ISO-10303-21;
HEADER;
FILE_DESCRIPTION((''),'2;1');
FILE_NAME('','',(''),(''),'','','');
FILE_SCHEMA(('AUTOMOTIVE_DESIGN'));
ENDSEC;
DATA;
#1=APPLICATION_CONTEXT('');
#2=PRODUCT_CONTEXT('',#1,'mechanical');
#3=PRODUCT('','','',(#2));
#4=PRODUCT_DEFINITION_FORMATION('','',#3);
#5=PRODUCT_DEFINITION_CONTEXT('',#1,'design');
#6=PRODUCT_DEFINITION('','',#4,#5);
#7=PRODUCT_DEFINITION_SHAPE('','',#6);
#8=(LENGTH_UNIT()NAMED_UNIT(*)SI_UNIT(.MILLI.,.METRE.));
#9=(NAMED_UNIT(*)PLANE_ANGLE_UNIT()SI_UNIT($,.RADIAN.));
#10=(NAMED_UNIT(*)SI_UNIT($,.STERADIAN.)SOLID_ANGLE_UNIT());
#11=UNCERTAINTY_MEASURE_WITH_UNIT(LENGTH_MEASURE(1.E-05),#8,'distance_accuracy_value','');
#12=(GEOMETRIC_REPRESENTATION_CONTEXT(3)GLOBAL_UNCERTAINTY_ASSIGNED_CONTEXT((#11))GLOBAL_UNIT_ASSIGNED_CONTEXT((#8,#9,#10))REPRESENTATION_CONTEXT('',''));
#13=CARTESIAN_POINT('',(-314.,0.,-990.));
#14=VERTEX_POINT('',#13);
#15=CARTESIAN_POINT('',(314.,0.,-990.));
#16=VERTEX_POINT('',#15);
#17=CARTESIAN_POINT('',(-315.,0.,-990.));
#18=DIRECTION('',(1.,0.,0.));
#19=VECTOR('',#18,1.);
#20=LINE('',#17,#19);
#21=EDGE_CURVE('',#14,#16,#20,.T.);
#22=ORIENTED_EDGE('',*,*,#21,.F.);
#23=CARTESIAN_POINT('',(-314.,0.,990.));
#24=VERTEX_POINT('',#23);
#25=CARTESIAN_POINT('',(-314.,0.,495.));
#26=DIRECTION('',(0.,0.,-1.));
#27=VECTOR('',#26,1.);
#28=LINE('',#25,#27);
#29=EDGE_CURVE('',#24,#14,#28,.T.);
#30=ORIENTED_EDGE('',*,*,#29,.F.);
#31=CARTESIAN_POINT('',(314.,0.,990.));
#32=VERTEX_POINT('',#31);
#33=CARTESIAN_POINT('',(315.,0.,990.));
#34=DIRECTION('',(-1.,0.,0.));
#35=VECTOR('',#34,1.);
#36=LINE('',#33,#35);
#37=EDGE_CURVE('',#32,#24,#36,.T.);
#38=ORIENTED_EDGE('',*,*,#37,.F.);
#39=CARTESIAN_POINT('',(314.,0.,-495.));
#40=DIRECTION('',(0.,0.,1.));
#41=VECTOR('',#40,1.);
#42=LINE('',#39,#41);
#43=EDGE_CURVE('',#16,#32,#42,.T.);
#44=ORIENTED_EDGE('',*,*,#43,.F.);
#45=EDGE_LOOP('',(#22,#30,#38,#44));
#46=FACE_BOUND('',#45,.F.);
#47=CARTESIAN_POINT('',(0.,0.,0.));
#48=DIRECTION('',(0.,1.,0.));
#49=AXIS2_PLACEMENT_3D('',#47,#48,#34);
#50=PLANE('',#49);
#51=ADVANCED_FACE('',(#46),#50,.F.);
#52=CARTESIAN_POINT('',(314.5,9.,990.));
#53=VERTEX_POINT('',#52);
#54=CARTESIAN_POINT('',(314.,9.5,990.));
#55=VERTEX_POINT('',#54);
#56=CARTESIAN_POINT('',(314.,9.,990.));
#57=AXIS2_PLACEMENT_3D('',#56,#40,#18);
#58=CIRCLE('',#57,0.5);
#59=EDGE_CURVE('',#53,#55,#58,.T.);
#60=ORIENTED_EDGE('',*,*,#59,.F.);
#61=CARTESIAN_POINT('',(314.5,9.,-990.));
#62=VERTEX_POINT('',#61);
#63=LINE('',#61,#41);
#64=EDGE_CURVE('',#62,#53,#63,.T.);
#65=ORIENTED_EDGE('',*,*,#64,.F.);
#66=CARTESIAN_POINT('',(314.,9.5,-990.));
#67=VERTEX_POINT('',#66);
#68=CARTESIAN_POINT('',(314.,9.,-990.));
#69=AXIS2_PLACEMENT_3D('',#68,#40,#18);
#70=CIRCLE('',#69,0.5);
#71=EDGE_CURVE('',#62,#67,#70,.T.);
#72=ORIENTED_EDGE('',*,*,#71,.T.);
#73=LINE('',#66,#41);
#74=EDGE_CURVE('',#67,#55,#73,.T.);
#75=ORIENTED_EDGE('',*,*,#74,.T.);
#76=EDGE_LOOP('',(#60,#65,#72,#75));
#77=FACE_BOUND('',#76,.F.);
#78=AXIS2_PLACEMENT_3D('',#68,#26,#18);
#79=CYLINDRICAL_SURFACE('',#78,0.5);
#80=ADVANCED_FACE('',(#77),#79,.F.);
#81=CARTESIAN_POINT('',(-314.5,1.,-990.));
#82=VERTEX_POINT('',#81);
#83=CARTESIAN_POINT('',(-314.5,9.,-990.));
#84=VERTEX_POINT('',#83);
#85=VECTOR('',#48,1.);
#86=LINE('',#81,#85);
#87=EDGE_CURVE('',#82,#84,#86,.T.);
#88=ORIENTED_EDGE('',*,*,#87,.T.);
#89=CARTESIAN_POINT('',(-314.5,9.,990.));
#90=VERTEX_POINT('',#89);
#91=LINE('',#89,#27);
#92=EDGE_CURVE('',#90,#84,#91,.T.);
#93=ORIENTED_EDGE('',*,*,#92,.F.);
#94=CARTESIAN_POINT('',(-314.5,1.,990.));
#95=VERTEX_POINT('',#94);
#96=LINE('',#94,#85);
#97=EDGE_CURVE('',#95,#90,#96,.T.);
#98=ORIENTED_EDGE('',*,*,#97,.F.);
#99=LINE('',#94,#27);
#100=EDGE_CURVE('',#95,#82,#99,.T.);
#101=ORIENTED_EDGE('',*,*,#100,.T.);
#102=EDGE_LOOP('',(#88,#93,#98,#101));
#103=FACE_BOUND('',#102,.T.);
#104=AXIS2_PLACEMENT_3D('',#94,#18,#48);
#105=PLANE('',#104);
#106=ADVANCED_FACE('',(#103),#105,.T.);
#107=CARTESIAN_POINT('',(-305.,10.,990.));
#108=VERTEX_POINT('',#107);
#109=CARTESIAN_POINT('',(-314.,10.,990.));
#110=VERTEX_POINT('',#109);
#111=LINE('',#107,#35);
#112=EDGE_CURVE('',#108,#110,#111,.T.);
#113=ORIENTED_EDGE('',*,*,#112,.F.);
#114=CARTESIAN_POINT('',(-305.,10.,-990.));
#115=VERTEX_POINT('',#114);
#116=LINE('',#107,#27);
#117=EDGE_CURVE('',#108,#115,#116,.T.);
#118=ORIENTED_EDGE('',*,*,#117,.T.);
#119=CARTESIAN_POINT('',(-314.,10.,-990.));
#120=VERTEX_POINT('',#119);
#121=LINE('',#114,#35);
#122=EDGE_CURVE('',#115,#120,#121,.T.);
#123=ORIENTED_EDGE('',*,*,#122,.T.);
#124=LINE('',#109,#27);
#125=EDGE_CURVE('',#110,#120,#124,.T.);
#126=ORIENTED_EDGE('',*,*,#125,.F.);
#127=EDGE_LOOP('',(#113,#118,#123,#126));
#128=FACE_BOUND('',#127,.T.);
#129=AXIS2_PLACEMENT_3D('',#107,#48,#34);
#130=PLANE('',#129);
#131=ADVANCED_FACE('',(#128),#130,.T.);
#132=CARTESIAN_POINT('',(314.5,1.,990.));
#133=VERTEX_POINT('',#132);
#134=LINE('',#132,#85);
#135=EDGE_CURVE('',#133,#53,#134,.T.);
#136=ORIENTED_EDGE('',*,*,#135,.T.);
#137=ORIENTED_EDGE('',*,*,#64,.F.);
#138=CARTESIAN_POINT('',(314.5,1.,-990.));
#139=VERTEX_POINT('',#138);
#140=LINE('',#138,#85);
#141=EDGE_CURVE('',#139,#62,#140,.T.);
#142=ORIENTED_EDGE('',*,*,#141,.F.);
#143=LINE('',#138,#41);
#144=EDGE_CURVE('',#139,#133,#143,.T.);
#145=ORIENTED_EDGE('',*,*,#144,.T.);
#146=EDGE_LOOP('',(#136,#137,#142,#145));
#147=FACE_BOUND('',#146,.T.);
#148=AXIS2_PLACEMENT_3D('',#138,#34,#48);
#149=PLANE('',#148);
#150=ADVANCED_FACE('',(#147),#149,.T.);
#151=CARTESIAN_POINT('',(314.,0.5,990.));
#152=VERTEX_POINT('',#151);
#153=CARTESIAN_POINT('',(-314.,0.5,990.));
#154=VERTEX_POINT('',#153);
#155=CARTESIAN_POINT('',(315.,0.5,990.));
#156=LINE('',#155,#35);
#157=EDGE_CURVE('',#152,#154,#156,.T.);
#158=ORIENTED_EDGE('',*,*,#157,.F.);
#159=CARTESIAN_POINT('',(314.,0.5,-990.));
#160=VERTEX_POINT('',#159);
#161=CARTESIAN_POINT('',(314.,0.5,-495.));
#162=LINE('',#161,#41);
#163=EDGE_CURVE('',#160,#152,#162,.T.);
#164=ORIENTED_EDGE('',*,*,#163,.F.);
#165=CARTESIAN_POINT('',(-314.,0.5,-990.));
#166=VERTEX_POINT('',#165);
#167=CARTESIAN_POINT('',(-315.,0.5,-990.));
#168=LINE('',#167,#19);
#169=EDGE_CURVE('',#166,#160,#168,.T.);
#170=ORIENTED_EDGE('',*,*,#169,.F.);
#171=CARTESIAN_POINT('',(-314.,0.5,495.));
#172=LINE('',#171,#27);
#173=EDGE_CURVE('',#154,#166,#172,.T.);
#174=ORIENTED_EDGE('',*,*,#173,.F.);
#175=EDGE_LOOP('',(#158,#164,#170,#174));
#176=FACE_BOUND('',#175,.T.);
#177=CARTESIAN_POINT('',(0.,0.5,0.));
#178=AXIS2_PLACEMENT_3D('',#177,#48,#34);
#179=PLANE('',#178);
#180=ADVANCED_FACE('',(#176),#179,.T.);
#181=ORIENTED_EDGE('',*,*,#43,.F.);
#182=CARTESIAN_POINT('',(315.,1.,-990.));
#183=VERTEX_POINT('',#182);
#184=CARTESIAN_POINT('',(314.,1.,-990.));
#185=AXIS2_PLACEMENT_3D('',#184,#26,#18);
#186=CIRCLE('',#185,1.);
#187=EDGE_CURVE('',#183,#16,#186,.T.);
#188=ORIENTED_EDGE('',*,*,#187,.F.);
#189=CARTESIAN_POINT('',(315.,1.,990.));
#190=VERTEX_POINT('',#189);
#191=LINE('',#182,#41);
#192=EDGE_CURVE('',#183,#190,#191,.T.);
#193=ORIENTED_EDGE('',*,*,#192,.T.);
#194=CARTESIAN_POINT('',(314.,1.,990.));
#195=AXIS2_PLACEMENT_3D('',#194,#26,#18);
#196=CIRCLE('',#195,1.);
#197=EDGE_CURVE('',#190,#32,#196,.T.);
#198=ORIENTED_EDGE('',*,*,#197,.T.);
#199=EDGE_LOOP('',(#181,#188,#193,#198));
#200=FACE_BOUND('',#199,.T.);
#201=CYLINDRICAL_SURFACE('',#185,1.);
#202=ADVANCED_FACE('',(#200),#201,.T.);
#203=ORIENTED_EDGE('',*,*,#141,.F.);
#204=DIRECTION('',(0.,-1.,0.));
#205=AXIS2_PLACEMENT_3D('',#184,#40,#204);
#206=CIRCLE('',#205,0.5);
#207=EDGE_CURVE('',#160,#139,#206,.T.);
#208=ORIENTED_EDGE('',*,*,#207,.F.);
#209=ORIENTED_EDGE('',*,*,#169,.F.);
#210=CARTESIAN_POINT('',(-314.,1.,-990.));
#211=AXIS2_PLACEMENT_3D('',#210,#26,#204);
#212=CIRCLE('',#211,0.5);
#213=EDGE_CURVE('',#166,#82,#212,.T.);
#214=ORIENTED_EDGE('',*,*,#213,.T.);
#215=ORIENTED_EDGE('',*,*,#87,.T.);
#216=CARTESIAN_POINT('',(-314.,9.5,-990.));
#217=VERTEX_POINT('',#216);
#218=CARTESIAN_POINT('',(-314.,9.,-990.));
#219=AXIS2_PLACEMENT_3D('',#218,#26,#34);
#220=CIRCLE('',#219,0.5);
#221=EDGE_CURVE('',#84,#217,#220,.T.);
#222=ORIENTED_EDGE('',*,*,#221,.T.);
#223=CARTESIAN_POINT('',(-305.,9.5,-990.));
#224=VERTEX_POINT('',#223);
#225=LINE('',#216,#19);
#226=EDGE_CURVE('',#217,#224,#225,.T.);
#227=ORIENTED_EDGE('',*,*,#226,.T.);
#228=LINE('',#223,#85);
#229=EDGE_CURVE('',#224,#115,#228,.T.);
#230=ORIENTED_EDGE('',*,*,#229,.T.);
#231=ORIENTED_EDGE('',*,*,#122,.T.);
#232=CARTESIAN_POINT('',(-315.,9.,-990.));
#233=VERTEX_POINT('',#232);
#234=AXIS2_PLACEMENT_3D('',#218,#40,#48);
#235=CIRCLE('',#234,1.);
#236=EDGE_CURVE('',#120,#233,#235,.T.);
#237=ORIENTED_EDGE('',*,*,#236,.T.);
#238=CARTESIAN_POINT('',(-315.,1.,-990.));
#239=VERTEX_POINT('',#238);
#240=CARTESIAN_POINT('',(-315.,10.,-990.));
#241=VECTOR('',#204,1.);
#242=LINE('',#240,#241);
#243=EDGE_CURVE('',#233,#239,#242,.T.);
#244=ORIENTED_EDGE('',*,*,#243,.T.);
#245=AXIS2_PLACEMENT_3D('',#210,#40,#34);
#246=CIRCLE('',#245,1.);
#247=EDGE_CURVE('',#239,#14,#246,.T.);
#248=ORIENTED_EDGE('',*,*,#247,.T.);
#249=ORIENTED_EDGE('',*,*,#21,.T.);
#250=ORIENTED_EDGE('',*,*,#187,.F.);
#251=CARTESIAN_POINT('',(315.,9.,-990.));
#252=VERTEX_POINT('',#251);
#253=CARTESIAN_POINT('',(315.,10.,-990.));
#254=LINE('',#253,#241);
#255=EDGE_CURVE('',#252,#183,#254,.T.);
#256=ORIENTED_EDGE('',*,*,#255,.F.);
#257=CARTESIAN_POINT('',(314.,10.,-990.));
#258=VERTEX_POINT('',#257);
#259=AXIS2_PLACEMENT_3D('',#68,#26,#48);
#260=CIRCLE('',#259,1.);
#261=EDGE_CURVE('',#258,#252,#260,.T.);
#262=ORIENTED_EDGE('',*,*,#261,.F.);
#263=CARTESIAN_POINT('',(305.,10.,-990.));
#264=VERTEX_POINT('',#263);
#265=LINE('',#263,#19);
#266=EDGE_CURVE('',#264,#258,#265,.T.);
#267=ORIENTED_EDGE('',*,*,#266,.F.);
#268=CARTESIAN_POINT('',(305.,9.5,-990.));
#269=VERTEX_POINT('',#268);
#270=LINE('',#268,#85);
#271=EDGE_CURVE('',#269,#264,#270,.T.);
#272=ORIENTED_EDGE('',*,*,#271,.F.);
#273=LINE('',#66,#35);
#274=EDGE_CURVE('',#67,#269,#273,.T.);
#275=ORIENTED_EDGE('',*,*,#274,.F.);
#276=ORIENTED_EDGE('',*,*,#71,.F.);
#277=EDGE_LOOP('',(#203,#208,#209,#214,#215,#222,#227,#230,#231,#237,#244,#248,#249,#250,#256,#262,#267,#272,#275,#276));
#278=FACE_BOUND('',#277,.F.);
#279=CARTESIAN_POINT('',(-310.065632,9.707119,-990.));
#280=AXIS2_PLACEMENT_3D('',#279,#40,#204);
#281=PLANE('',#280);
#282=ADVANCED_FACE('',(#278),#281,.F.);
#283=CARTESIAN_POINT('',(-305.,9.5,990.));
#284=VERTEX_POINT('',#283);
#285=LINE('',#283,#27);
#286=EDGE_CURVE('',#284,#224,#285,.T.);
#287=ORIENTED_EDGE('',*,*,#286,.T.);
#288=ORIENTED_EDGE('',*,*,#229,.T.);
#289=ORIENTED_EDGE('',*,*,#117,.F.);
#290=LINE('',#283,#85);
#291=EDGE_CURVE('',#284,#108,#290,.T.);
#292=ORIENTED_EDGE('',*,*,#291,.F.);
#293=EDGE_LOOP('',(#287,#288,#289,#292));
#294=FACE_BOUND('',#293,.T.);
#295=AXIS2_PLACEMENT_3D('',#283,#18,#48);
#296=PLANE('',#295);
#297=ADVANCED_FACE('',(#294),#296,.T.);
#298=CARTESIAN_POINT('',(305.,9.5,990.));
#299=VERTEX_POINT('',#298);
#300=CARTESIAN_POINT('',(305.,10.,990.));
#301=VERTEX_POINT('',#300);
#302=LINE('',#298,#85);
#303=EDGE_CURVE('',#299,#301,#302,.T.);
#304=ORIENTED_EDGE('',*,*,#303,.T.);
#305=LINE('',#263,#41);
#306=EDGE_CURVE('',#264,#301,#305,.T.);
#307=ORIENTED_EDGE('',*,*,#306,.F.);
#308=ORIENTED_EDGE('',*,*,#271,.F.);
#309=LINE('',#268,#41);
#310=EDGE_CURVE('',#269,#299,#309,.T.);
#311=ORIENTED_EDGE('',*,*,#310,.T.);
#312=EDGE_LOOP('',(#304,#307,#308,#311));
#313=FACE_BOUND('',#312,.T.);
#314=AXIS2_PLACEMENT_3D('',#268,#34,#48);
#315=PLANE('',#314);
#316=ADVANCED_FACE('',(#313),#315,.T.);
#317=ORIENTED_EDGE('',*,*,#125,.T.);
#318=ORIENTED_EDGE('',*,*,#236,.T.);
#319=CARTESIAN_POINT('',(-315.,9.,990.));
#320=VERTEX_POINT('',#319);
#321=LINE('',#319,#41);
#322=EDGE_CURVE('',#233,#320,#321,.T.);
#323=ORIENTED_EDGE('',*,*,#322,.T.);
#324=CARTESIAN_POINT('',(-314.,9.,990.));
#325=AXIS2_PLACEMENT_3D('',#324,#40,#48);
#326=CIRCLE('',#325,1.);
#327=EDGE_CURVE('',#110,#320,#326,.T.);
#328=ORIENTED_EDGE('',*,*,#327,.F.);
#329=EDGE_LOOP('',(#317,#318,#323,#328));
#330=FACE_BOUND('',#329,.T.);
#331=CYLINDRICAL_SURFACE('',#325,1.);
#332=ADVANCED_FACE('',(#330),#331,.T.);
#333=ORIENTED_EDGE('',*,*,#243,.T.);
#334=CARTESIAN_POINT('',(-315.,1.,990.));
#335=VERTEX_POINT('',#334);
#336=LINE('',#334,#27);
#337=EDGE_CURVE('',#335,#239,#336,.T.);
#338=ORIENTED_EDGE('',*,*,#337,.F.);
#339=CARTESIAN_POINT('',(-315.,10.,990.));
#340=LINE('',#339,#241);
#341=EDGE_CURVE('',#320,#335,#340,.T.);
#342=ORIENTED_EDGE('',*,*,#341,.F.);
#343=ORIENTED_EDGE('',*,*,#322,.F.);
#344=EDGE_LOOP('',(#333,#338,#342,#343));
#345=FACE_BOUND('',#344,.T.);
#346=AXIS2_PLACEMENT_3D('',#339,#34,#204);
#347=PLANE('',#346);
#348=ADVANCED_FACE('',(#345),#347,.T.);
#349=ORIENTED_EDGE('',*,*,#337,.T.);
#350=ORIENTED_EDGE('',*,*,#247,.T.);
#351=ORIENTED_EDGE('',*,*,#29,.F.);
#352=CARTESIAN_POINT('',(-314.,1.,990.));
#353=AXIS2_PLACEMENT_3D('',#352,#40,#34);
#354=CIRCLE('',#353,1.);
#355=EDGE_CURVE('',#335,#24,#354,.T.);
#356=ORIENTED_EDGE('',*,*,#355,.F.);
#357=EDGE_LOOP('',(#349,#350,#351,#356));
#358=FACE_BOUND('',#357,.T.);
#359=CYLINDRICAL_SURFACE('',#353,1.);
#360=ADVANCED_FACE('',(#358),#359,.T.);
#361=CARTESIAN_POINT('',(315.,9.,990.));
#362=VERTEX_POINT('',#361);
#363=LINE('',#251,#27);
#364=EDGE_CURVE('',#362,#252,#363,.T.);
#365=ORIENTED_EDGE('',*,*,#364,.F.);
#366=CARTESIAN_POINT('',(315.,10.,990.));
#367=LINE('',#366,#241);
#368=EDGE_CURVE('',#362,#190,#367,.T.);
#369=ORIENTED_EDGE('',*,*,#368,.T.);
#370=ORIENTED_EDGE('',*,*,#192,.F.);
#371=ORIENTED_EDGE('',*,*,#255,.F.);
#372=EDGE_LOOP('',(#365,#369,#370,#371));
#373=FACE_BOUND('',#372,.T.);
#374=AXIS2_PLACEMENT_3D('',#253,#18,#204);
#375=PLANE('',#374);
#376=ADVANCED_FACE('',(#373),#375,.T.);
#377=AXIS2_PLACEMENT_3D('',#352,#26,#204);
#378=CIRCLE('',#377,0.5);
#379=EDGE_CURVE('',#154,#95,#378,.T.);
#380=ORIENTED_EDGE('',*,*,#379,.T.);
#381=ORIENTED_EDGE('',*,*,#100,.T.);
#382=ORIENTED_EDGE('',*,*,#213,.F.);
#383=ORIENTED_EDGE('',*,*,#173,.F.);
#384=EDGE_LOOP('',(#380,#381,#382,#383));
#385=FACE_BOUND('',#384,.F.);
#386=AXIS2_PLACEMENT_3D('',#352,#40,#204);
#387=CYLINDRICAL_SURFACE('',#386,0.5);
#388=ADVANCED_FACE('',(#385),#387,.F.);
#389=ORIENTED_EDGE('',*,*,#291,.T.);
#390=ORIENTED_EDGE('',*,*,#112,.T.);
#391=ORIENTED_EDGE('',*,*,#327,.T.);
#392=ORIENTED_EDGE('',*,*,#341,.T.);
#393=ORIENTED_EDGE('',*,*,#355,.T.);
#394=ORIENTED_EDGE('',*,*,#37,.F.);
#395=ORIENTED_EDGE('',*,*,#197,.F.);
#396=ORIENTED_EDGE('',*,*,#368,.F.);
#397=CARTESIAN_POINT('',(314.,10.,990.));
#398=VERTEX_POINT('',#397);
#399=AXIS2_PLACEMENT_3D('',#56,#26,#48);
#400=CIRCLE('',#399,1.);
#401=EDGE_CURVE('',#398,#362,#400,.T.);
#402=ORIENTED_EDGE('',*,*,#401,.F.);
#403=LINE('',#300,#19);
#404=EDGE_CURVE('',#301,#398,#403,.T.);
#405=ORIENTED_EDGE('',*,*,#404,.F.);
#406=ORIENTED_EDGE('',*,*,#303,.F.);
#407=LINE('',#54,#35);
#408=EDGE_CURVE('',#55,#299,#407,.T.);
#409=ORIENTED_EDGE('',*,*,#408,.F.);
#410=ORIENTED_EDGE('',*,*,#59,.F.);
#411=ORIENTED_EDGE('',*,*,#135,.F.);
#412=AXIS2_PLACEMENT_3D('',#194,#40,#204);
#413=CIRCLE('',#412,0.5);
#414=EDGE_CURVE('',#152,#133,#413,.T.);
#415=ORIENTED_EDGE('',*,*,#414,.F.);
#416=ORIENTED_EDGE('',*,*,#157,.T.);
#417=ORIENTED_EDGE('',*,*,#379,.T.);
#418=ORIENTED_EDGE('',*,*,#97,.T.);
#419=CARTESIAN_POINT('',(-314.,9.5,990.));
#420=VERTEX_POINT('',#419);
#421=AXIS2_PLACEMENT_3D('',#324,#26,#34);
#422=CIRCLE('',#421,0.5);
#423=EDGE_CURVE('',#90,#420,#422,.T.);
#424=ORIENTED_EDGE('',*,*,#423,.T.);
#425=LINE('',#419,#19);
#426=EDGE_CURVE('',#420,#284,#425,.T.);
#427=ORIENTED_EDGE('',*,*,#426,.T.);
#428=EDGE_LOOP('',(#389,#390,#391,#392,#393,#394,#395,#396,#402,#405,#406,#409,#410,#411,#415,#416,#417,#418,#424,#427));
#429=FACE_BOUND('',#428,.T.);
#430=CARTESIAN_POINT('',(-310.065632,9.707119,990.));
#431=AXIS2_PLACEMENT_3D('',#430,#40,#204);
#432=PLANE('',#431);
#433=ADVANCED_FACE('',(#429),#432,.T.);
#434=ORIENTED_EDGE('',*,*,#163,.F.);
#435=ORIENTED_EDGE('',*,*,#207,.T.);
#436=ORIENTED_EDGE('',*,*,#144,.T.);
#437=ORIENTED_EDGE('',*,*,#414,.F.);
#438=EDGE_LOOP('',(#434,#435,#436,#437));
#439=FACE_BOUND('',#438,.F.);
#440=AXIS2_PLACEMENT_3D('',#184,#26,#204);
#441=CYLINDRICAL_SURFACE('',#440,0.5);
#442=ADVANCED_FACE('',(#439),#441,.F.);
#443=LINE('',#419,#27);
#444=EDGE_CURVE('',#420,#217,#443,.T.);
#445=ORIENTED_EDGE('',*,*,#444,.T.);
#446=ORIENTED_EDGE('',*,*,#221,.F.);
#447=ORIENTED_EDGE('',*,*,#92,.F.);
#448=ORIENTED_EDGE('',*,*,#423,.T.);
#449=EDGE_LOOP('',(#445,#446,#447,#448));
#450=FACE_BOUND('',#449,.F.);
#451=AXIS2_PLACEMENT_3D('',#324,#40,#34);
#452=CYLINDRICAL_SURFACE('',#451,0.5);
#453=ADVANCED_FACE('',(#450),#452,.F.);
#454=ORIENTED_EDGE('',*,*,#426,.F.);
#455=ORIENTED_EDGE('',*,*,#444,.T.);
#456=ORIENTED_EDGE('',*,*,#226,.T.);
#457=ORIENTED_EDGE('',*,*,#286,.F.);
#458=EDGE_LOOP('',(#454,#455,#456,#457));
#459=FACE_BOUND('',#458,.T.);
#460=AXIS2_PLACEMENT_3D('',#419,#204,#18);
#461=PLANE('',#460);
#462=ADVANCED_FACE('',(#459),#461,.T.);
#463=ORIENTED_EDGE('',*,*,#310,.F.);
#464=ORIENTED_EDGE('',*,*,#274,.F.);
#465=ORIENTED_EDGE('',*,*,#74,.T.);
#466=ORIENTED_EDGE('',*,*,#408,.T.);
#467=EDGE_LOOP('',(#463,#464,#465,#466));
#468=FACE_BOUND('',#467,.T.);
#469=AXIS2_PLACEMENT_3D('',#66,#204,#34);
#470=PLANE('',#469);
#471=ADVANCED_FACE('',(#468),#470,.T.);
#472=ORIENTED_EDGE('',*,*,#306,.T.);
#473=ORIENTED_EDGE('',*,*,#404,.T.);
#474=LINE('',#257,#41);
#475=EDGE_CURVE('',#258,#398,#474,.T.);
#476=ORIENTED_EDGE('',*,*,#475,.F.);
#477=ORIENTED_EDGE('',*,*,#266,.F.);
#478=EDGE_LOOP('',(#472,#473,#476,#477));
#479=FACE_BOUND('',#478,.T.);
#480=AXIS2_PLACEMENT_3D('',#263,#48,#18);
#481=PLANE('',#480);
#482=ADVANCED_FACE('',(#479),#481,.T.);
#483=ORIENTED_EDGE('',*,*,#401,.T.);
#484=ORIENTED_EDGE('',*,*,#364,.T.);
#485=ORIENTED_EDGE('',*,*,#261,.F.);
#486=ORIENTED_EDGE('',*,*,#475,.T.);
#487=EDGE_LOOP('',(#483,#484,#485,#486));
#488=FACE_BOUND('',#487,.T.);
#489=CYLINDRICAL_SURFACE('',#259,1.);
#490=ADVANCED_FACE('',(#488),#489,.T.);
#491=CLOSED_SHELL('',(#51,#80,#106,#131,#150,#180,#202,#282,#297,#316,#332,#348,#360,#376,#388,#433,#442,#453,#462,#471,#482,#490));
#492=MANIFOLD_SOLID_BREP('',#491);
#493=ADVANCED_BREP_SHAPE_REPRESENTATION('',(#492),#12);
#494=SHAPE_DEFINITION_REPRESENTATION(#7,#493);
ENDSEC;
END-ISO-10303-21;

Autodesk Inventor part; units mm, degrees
ref_plane "YZ Plane" through (0, 0, 0) normal (1, 0, 0) x (0, 1, 0)
ref_plane "XZ Plane" through (0, 0, 0) normal (0, 1, 0) x (-1, 0, 0)
ref_plane "XY Plane" through (0, 0, 0) normal (0, 0, 1) x (1, 0, 0)
sketch "Sketch6" plane through (0, 0, 0) normal (0, 1, 0) x (-1, 0, 0)
  line L0 (315, -990) -> (-315, -990)
  line L1 (-315, -990) -> (-315, 990)
  line L2 (-315, 990) -> (315, 990)
  line L3 (315, 990) -> (315, -990)
  line L4 (315, -990) -> (-315, 990) construction
  line L5 (-315, -990) -> (315, 990) construction
  point P0 (0, 0)
  dimension "d52" = 630
  dimension "d53" = 1980
extrude "Plate2" add sketch "Sketch6" along normal blind 0.5
sketch "Sketch11" plane through (314.5, 0, -990) normal (1, 0, 0) x (0, 1, 0)
  line L0 (0, 1980) -> (0, 0)
  line L1 (0, 0) -> (10, 0)
  line L2 (10, 0) -> (10, 1980)
  line L3 (10, 1980) -> (0, 1980)
edge flange "Flange2" height 10 angle 90 thickness 0.5 bend radius 0.5 thickness toward (1, 0, 0) relief tear relief width 0.5 relief depth 0.25 edges at (315, 0.5, 0) wall of the first edge with corners at (314.5, 0, 990) (314.5, 0, -990) (314.5, 10, -990) (314.5, 10, 990)
bend "Bend3"
corner "Corner3"
sketch "Sketch12" plane through (315, 9.5, -990) normal (0, 1, 0) x (-1, 0, 0)
  line L0 (0, 1980) -> (0, 0)
  line L1 (0, 0) -> (10, 0)
  line L2 (10, 0) -> (10, 1980)
  line L3 (10, 1980) -> (0, 1980)
edge flange "Flange3" height 10 angle 90 thickness 0.5 bend radius 0.5 thickness toward (0, 1, 0) relief tear relief width 0.5 relief depth 0.25 edges at (314.5, 10, 0) wall of the first edge with corners at (315, 9.5, 990) (315, 9.5, -990) (305, 9.5, -990) (305, 9.5, 990)
bend "Bend4"
corner "Corner4"
sketch "Sketch13" plane through (-314.5, 0, 990) normal (-1, 0, 0) x (0, -1, 0)
  line L0 (0, -1980) -> (0, 0)
  line L1 (0, 0) -> (-10, 0)
  line L2 (-10, 0) -> (-10, -1980)
  line L3 (-10, -1980) -> (0, -1980)
edge flange "Flange4" height 10 angle 90 thickness 0.5 bend radius 0.5 thickness toward (-1, 0, 0) relief tear relief width 0.5 relief depth 0.25 edges at (-315, 0.5, 0) wall of the first edge with corners at (-314.5, 0, -990) (-314.5, 0, 990) (-314.5, 10, 990) (-314.5, 10, -990)
bend "Bend5"
corner "Corner5"
sketch "Sketch14" plane through (-315, 9.5, 990) normal (0, 1, 0) x (-1, 0, 0)
  line L0 (0, -1980) -> (0, 0)
  line L1 (0, 0) -> (-10, 0)
  line L2 (-10, 0) -> (-10, -1980)
  line L3 (-10, -1980) -> (0, -1980)
edge flange "Flange5" height 10 angle 90 thickness 0.5 bend radius 0.5 thickness toward (0, 1, 0) relief tear relief width 0.5 relief depth 0.25 edges at (-314.5, 10, 0) wall of the first edge with corners at (-315, 9.5, -990) (-315, 9.5, 990) (-305, 9.5, 990) (-305, 9.5, -990)
bend "Bend6"
corner "Corner6"
equation "\"d53\" = ЖАБРЫ_базовая_длина_дл_лист"
equation "\"d54\" = Thickness"
equation "\"d84\" = BendReliefWidth"
equation "\"d85\" = BendReliefDepth"
equation "\"d86\" = MinimumRemnant"
equation "\"d87\" = TransitionRadius"
equation "\"d90\" = BendRadius"
equation "\"d91\" = CornerReliefSize"
equation "\"d92\" = GapSize"
equation "\"d93\" = JacobiRadiusSize"
equation "\"d94\" = BendReliefWidth"
equation "\"d95\" = BendReliefDepth"
equation "\"d96\" = MinimumRemnant"
equation "\"d97\" = TransitionRadius"
equation "\"d100\" = BendRadius"
equation "\"d101\" = CornerReliefSize"
equation "\"d102\" = GapSize"
equation "\"d103\" = JacobiRadiusSize"
equation "\"d104\" = BendReliefWidth"
equation "\"d105\" = BendReliefDepth"
equation "\"d106\" = MinimumRemnant"
equation "\"d107\" = TransitionRadius"
equation "\"d110\" = BendRadius"
equation "\"d111\" = CornerReliefSize"
equation "\"d112\" = GapSize"
equation "\"d113\" = JacobiRadiusSize"
equation "\"d114\" = BendReliefWidth"
equation "\"d115\" = BendReliefDepth"
equation "\"d116\" = MinimumRemnant"
equation "\"d117\" = TransitionRadius"
equation "\"d120\" = BendRadius"
equation "\"d121\" = CornerReliefSize"
equation "\"d122\" = GapSize"
equation "\"d123\" = JacobiRadiusSize"
equation "\"BendRadius\" = Thickness"
equation "\"BendReliefWidth\" = Thickness"
equation "\"BendReliefDepth\" = 0.5 * Thickness"
equation "\"CornerReliefSize\" = 4 * Thickness"
equation "\"MinimumRemnant\" = 2 * Thickness"
equation "\"TransitionRadius\" = BendRadius"
equation "\"JacobiRadiusSize\" = BendRadius"
equation "\"GapSize\" = Thickness"
equation "\"ЖАБРЫ_базовая_длина_дл_лист\" = 1980"
equation "\"Thickness\" = 0.5"
properties part number "MSC 808 sheet gills" material "Stainless Steel"
